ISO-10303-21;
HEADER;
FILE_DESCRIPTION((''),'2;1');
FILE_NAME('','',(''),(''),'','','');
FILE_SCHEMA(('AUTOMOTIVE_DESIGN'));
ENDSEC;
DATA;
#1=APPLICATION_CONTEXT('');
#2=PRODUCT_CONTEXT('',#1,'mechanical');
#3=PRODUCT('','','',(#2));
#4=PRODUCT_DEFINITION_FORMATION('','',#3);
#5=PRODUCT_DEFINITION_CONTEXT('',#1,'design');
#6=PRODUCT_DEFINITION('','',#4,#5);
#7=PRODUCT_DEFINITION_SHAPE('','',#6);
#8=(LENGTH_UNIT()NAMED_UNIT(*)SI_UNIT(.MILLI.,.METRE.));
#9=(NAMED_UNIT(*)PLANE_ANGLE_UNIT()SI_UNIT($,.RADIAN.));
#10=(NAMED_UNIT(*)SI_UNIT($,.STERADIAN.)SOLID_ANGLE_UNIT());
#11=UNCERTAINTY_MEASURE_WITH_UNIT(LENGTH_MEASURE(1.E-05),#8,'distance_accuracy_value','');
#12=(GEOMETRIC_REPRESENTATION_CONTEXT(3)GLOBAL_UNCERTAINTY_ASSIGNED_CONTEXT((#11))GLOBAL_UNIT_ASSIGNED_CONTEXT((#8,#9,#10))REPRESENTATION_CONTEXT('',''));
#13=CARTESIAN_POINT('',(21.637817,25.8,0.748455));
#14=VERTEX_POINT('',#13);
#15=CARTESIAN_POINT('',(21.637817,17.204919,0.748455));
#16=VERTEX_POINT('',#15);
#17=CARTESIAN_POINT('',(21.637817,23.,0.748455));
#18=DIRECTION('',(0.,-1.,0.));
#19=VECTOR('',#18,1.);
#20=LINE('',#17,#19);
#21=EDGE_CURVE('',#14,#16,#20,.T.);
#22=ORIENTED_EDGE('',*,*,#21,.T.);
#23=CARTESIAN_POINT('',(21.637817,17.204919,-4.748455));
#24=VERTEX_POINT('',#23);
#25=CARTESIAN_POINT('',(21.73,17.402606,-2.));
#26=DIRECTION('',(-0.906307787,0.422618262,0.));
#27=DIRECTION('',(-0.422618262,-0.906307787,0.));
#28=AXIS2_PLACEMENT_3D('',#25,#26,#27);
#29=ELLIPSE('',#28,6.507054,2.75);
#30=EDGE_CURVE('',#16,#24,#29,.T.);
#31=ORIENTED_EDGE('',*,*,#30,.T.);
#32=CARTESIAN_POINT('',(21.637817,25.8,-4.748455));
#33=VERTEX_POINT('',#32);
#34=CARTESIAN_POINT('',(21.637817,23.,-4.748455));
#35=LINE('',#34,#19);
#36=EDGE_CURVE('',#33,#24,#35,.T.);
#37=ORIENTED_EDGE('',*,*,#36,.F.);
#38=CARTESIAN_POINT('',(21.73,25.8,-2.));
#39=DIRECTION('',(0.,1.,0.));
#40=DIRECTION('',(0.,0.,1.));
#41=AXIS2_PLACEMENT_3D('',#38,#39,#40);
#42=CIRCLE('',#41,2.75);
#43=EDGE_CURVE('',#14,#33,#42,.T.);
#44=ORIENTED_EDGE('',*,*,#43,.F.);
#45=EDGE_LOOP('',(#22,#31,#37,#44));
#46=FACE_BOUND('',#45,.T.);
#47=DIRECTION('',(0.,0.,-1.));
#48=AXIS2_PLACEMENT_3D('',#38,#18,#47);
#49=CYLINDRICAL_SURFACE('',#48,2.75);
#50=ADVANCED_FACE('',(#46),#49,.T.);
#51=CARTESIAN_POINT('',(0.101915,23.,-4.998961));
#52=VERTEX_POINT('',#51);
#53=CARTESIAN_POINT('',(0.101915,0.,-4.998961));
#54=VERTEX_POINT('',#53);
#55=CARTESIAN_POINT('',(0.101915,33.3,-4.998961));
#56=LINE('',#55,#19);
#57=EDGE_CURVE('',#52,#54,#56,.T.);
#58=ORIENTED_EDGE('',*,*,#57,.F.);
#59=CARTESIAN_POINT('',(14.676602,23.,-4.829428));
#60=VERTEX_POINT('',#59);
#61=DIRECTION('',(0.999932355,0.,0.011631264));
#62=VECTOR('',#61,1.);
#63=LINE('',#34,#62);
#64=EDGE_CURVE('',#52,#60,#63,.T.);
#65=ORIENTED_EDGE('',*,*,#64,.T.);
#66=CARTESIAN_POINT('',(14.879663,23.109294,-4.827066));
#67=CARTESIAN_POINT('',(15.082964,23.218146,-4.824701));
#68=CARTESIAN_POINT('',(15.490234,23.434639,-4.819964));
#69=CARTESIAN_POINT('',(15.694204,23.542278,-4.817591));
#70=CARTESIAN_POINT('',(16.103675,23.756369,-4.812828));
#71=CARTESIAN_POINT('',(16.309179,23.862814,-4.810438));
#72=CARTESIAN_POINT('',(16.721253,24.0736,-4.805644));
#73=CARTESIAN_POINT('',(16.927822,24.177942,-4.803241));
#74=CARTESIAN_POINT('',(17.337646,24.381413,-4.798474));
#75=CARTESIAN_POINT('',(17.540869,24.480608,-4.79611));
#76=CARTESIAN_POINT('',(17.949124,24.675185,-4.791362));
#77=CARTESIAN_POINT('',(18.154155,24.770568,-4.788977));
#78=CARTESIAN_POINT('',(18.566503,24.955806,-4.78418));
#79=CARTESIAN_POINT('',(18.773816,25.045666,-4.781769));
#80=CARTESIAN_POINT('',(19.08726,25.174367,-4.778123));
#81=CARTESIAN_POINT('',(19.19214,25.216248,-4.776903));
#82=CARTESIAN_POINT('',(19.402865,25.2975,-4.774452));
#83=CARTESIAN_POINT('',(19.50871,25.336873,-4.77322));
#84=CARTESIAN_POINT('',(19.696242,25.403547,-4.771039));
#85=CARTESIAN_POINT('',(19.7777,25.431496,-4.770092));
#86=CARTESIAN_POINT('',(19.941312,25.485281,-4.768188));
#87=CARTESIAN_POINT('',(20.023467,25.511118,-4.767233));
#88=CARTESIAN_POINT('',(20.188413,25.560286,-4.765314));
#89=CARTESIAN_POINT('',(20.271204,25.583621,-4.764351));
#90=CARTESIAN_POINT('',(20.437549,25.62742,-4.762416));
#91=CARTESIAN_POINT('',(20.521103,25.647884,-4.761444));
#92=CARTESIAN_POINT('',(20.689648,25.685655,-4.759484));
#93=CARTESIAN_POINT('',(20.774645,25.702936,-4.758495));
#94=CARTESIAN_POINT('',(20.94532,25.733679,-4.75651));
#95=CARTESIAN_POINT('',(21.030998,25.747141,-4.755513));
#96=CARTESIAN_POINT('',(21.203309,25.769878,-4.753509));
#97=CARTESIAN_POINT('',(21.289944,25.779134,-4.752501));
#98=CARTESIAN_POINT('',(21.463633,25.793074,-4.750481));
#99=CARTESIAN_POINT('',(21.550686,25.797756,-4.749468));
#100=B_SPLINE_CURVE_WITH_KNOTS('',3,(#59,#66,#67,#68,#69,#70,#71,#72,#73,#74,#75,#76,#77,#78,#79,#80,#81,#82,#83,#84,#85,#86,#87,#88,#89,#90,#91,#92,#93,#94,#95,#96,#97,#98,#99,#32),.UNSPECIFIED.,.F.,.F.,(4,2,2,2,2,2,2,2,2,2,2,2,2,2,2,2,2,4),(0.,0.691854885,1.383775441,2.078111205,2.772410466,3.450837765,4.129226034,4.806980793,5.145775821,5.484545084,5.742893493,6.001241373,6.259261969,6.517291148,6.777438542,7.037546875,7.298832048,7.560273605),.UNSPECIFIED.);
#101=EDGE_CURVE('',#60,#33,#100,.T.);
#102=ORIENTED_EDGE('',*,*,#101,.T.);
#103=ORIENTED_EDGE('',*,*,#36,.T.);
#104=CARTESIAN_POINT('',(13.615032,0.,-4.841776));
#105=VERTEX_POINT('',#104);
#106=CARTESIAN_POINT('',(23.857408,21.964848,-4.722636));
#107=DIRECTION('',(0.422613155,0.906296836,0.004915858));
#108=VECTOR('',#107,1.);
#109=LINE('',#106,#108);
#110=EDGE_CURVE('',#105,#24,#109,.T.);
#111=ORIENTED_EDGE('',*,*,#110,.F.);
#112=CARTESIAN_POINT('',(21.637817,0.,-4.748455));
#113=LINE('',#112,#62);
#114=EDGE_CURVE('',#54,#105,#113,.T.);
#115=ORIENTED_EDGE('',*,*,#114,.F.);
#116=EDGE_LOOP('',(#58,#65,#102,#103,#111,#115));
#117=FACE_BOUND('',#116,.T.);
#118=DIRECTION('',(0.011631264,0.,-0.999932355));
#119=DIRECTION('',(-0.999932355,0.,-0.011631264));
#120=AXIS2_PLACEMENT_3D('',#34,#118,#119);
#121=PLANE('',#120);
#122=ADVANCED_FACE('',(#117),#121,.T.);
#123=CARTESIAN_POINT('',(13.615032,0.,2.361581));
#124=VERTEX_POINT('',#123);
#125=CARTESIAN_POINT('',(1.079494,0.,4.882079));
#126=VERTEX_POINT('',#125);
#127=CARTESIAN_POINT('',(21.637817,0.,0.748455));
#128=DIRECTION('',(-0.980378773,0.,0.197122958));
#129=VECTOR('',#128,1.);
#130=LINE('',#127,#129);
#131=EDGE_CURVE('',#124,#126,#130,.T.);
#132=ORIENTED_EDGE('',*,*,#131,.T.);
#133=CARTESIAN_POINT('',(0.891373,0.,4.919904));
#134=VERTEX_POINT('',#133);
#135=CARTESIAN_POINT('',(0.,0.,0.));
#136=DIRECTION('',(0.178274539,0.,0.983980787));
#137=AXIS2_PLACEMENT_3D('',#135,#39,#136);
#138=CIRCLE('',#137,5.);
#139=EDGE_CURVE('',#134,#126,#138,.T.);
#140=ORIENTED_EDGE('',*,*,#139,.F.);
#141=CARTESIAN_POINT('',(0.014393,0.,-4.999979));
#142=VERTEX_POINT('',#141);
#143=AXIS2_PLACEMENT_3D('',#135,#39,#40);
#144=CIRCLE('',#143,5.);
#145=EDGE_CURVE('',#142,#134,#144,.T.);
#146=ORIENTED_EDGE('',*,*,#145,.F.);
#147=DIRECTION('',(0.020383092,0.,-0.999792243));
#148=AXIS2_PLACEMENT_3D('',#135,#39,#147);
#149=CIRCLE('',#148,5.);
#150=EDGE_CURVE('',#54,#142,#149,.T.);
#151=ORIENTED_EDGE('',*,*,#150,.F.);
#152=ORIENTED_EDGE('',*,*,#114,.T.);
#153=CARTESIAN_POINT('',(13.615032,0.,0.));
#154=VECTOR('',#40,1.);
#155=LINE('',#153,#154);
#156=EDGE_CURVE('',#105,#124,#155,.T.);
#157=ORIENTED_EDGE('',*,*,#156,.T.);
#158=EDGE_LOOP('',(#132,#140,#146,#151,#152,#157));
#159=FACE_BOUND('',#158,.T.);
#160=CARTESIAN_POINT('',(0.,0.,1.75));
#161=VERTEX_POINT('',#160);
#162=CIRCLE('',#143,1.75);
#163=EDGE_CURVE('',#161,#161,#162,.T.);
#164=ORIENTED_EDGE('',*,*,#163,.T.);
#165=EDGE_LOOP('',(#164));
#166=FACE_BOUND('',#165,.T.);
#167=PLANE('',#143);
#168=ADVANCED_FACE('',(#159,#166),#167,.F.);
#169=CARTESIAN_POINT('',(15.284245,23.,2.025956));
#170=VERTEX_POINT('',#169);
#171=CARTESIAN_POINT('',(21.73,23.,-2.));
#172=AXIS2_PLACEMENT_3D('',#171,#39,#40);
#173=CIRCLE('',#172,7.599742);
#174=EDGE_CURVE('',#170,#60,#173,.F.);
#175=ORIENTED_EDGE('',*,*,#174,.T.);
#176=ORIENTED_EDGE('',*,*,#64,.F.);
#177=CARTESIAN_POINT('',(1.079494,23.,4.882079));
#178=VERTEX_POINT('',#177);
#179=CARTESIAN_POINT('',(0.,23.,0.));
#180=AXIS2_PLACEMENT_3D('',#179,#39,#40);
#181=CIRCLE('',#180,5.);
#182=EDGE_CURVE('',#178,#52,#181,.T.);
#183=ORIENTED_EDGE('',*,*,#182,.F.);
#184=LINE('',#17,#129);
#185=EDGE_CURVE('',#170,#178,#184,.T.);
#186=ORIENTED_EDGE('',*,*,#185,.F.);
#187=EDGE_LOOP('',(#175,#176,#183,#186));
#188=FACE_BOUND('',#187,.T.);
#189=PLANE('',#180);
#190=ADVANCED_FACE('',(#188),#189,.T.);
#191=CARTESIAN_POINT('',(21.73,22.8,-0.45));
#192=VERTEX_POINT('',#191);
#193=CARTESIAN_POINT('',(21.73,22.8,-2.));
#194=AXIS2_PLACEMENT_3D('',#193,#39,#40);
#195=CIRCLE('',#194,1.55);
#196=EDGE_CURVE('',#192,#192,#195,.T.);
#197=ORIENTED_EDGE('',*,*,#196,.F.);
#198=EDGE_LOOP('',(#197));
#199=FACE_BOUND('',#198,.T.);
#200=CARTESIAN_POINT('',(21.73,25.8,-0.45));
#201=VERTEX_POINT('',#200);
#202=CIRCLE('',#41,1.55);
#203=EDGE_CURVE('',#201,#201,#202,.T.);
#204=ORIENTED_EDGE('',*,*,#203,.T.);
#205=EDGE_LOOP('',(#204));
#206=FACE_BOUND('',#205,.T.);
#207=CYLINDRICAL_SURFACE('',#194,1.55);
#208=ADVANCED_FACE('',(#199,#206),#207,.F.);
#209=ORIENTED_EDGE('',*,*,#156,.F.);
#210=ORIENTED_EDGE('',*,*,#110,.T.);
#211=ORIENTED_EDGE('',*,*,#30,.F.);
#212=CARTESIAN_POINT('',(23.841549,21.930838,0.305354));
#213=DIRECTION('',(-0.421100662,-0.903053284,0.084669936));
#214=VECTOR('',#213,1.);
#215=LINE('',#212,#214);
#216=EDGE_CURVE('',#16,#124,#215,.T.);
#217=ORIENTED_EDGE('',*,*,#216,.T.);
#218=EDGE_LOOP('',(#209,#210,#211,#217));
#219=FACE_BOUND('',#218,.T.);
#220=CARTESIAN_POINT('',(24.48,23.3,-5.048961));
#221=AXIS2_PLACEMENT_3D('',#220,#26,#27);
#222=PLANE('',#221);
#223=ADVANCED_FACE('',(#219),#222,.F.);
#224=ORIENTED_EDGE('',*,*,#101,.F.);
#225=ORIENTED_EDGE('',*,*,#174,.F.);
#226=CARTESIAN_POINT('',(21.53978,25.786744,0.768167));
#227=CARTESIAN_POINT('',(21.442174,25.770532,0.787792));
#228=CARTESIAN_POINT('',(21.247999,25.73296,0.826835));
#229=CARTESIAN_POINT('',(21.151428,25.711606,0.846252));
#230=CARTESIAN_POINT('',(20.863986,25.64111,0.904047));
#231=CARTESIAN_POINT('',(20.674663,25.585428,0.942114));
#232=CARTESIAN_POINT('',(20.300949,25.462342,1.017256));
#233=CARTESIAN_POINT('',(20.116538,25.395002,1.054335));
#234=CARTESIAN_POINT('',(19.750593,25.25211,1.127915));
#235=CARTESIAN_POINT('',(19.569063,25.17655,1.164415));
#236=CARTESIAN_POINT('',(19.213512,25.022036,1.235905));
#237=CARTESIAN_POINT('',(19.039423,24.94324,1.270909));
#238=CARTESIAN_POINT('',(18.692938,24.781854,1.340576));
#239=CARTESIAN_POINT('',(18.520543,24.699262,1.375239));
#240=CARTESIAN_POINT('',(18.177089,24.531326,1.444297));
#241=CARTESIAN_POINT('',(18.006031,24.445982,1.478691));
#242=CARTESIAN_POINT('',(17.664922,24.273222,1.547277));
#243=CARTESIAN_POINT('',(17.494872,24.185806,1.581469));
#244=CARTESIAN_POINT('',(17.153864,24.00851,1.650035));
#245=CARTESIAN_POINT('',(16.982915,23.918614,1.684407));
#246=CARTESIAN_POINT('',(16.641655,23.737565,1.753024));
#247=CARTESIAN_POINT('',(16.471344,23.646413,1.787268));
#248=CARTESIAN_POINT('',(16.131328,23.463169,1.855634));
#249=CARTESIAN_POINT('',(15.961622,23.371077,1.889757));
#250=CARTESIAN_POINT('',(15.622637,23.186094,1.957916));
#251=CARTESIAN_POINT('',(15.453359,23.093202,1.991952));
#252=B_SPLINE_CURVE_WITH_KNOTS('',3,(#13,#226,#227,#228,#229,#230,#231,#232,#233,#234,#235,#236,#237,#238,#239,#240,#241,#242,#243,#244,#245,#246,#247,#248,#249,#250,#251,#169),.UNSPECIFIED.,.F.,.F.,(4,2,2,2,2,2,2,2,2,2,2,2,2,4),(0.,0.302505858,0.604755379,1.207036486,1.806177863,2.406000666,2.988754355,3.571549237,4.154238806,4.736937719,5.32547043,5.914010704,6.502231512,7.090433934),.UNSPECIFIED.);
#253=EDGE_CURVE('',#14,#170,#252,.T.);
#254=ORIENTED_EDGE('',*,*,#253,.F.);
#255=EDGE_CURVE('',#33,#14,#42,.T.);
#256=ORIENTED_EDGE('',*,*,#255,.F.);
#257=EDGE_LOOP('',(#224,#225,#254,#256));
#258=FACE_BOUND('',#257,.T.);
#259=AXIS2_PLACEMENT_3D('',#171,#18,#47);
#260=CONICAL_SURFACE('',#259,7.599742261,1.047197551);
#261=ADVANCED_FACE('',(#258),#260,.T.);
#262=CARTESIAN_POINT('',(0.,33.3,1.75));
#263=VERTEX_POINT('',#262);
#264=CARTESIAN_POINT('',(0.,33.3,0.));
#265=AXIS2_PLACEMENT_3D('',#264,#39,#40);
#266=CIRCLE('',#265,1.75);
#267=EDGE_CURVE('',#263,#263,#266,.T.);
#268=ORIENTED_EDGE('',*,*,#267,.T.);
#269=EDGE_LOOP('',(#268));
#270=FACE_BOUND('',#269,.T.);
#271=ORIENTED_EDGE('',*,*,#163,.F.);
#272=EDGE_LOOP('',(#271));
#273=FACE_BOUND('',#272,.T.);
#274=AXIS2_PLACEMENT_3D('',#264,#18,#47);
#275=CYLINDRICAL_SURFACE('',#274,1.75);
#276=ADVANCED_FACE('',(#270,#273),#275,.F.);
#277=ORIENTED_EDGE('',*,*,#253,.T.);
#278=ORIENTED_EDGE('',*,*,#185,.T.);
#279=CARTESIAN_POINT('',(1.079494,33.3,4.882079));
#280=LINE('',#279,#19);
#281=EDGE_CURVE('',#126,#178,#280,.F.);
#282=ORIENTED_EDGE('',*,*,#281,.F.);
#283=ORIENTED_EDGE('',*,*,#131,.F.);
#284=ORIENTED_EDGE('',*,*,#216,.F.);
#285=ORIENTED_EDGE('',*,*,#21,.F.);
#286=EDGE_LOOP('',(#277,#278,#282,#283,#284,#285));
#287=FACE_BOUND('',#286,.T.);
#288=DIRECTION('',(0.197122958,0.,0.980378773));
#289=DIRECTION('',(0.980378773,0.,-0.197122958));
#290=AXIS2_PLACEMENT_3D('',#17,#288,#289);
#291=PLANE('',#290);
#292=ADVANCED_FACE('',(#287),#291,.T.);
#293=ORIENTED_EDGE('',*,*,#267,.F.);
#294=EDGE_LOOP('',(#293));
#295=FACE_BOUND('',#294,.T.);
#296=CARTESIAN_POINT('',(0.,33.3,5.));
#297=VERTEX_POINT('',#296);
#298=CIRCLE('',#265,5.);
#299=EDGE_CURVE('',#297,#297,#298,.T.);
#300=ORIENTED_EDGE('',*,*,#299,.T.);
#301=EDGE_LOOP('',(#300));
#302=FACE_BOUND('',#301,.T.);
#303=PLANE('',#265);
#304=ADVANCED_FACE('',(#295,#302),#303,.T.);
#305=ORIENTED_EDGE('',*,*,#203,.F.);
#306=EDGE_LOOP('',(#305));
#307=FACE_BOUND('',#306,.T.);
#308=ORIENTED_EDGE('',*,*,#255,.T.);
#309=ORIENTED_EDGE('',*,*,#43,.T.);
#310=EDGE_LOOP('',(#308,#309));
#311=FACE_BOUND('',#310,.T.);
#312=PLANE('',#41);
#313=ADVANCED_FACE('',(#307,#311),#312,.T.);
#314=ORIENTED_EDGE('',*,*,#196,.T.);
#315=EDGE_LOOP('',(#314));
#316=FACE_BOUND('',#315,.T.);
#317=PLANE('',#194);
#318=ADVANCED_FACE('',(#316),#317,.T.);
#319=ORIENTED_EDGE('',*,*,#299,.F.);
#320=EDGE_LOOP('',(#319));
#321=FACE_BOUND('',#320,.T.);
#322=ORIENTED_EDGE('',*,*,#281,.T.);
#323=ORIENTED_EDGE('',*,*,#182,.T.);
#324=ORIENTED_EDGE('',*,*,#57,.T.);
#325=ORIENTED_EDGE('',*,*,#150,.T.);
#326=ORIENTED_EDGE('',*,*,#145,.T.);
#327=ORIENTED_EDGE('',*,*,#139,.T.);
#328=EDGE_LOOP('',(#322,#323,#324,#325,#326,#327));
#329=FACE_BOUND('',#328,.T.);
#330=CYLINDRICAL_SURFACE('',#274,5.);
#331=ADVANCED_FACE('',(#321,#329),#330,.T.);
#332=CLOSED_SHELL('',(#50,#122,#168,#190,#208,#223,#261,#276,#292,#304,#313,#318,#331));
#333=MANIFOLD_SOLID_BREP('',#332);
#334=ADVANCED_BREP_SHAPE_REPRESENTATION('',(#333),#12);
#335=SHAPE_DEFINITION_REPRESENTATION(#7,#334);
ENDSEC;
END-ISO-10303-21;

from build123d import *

# Parameters (mm, degrees)
SKETCH1_R               = 5
SKETCH1_R_2             = 1.75
BOSS_EXTRUDE1_DEPTH     = 33.3
SKETCH2_R               = 2.75
BOSS_EXTRUDE2_DEPTH     = 25.8
BOSS_EXTRUDE3_DEPTH     = 23
SKETCH3_R               = 1.55
CUT_EXTRUDE1_DEPTH      = 3
CUT_EXTRUDE2_DEPTH      = 42.631243075
CUT_EXTRUDE2_DEPTH_BACK = 42.631243075
CHAMFER3_SIZE2          = 2.8
CHAMFER3_SIZE           = 4.849742261


with BuildPart() as part:
    # Sketch1 → Boss-Extrude1 (new body)
    with BuildSketch(Plane(origin=(0, 0, 0), x_dir=(1, 0, 0), z_dir=(0, 1, 0))):
        with Locations(Location((0, 0, 0), (0, 0, 270))):
            Circle(SKETCH1_R)
        with Locations(Location((0, 0, 0), (0, 0, 270))):
            Circle(SKETCH1_R_2, mode=Mode.SUBTRACT)
    extrude(amount=BOSS_EXTRUDE1_DEPTH)



with BuildPart() as body_2:
    # Sketch2 → Boss-Extrude2 (new body)
    with BuildSketch(Plane(origin=(0, 0, 0), x_dir=(1, 0, 0), z_dir=(0, 1, 0))):
        with Locations(Location((21.73, 2, 0), (0, 0, 90))):
            Circle(SKETCH2_R)
    extrude(amount=BOSS_EXTRUDE2_DEPTH)


with BuildPart() as part_1:
    add(part.part)

    add(body_2.part)  # Boss-Extrude3 merges body 2
    # Sketch4 → Boss-Extrude3 (add)
    with BuildSketch(Plane.XZ):
        Polygon((21.637816883, 0.748454524), (0.891372697, 4.919903934), (2.67017604, 0), (0.014392721, -4.999979285), (21.637816883, -4.748454524), align=None)
    extrude(amount=-BOSS_EXTRUDE3_DEPTH)

    # Sketch3 → Cut-Extrude1 (cut)
    with BuildSketch(Plane(origin=(0, 25.8, 0), x_dir=(1, 0, 0), z_dir=(0, 1, 0))):
        with Locations(Location((21.73, 2, 0), (0, 0, 270))):
            Circle(SKETCH3_R)
    extrude(amount=-CUT_EXTRUDE1_DEPTH, mode=Mode.SUBTRACT)

    # Sketch5 → Cut-Extrude2 (cut, two sides: drawn at the far end of the back side and taken through both)
    with BuildSketch(Plane.XY.offset(-CUT_EXTRUDE2_DEPTH_BACK)):
        Polygon((24.48, 23.3), (12.590189784, -2.197780292), (24.48, 0), (24.48, 11.782113075), align=None)
    extrude(amount=CUT_EXTRUDE2_DEPTH + CUT_EXTRUDE2_DEPTH_BACK, mode=Mode.SUBTRACT)

    # Chamfer3
    chamfer3_edges = [part_1.edges().sort_by_distance(p)[0] for p in [
        (18.98, 23, -2),
    ]]
    chamfer3_side = [part_1.faces().sort_by_distance(p)[0] for p in [
        (18.924, 23, -2),
    ]]
    chamfer(chamfer3_edges, length=CHAMFER3_SIZE - 0.0001, length2=CHAMFER3_SIZE2 - 0.0001, reference=chamfer3_side[0])  # a hair under: the kernel refuses the full size


solid = part_1.part
